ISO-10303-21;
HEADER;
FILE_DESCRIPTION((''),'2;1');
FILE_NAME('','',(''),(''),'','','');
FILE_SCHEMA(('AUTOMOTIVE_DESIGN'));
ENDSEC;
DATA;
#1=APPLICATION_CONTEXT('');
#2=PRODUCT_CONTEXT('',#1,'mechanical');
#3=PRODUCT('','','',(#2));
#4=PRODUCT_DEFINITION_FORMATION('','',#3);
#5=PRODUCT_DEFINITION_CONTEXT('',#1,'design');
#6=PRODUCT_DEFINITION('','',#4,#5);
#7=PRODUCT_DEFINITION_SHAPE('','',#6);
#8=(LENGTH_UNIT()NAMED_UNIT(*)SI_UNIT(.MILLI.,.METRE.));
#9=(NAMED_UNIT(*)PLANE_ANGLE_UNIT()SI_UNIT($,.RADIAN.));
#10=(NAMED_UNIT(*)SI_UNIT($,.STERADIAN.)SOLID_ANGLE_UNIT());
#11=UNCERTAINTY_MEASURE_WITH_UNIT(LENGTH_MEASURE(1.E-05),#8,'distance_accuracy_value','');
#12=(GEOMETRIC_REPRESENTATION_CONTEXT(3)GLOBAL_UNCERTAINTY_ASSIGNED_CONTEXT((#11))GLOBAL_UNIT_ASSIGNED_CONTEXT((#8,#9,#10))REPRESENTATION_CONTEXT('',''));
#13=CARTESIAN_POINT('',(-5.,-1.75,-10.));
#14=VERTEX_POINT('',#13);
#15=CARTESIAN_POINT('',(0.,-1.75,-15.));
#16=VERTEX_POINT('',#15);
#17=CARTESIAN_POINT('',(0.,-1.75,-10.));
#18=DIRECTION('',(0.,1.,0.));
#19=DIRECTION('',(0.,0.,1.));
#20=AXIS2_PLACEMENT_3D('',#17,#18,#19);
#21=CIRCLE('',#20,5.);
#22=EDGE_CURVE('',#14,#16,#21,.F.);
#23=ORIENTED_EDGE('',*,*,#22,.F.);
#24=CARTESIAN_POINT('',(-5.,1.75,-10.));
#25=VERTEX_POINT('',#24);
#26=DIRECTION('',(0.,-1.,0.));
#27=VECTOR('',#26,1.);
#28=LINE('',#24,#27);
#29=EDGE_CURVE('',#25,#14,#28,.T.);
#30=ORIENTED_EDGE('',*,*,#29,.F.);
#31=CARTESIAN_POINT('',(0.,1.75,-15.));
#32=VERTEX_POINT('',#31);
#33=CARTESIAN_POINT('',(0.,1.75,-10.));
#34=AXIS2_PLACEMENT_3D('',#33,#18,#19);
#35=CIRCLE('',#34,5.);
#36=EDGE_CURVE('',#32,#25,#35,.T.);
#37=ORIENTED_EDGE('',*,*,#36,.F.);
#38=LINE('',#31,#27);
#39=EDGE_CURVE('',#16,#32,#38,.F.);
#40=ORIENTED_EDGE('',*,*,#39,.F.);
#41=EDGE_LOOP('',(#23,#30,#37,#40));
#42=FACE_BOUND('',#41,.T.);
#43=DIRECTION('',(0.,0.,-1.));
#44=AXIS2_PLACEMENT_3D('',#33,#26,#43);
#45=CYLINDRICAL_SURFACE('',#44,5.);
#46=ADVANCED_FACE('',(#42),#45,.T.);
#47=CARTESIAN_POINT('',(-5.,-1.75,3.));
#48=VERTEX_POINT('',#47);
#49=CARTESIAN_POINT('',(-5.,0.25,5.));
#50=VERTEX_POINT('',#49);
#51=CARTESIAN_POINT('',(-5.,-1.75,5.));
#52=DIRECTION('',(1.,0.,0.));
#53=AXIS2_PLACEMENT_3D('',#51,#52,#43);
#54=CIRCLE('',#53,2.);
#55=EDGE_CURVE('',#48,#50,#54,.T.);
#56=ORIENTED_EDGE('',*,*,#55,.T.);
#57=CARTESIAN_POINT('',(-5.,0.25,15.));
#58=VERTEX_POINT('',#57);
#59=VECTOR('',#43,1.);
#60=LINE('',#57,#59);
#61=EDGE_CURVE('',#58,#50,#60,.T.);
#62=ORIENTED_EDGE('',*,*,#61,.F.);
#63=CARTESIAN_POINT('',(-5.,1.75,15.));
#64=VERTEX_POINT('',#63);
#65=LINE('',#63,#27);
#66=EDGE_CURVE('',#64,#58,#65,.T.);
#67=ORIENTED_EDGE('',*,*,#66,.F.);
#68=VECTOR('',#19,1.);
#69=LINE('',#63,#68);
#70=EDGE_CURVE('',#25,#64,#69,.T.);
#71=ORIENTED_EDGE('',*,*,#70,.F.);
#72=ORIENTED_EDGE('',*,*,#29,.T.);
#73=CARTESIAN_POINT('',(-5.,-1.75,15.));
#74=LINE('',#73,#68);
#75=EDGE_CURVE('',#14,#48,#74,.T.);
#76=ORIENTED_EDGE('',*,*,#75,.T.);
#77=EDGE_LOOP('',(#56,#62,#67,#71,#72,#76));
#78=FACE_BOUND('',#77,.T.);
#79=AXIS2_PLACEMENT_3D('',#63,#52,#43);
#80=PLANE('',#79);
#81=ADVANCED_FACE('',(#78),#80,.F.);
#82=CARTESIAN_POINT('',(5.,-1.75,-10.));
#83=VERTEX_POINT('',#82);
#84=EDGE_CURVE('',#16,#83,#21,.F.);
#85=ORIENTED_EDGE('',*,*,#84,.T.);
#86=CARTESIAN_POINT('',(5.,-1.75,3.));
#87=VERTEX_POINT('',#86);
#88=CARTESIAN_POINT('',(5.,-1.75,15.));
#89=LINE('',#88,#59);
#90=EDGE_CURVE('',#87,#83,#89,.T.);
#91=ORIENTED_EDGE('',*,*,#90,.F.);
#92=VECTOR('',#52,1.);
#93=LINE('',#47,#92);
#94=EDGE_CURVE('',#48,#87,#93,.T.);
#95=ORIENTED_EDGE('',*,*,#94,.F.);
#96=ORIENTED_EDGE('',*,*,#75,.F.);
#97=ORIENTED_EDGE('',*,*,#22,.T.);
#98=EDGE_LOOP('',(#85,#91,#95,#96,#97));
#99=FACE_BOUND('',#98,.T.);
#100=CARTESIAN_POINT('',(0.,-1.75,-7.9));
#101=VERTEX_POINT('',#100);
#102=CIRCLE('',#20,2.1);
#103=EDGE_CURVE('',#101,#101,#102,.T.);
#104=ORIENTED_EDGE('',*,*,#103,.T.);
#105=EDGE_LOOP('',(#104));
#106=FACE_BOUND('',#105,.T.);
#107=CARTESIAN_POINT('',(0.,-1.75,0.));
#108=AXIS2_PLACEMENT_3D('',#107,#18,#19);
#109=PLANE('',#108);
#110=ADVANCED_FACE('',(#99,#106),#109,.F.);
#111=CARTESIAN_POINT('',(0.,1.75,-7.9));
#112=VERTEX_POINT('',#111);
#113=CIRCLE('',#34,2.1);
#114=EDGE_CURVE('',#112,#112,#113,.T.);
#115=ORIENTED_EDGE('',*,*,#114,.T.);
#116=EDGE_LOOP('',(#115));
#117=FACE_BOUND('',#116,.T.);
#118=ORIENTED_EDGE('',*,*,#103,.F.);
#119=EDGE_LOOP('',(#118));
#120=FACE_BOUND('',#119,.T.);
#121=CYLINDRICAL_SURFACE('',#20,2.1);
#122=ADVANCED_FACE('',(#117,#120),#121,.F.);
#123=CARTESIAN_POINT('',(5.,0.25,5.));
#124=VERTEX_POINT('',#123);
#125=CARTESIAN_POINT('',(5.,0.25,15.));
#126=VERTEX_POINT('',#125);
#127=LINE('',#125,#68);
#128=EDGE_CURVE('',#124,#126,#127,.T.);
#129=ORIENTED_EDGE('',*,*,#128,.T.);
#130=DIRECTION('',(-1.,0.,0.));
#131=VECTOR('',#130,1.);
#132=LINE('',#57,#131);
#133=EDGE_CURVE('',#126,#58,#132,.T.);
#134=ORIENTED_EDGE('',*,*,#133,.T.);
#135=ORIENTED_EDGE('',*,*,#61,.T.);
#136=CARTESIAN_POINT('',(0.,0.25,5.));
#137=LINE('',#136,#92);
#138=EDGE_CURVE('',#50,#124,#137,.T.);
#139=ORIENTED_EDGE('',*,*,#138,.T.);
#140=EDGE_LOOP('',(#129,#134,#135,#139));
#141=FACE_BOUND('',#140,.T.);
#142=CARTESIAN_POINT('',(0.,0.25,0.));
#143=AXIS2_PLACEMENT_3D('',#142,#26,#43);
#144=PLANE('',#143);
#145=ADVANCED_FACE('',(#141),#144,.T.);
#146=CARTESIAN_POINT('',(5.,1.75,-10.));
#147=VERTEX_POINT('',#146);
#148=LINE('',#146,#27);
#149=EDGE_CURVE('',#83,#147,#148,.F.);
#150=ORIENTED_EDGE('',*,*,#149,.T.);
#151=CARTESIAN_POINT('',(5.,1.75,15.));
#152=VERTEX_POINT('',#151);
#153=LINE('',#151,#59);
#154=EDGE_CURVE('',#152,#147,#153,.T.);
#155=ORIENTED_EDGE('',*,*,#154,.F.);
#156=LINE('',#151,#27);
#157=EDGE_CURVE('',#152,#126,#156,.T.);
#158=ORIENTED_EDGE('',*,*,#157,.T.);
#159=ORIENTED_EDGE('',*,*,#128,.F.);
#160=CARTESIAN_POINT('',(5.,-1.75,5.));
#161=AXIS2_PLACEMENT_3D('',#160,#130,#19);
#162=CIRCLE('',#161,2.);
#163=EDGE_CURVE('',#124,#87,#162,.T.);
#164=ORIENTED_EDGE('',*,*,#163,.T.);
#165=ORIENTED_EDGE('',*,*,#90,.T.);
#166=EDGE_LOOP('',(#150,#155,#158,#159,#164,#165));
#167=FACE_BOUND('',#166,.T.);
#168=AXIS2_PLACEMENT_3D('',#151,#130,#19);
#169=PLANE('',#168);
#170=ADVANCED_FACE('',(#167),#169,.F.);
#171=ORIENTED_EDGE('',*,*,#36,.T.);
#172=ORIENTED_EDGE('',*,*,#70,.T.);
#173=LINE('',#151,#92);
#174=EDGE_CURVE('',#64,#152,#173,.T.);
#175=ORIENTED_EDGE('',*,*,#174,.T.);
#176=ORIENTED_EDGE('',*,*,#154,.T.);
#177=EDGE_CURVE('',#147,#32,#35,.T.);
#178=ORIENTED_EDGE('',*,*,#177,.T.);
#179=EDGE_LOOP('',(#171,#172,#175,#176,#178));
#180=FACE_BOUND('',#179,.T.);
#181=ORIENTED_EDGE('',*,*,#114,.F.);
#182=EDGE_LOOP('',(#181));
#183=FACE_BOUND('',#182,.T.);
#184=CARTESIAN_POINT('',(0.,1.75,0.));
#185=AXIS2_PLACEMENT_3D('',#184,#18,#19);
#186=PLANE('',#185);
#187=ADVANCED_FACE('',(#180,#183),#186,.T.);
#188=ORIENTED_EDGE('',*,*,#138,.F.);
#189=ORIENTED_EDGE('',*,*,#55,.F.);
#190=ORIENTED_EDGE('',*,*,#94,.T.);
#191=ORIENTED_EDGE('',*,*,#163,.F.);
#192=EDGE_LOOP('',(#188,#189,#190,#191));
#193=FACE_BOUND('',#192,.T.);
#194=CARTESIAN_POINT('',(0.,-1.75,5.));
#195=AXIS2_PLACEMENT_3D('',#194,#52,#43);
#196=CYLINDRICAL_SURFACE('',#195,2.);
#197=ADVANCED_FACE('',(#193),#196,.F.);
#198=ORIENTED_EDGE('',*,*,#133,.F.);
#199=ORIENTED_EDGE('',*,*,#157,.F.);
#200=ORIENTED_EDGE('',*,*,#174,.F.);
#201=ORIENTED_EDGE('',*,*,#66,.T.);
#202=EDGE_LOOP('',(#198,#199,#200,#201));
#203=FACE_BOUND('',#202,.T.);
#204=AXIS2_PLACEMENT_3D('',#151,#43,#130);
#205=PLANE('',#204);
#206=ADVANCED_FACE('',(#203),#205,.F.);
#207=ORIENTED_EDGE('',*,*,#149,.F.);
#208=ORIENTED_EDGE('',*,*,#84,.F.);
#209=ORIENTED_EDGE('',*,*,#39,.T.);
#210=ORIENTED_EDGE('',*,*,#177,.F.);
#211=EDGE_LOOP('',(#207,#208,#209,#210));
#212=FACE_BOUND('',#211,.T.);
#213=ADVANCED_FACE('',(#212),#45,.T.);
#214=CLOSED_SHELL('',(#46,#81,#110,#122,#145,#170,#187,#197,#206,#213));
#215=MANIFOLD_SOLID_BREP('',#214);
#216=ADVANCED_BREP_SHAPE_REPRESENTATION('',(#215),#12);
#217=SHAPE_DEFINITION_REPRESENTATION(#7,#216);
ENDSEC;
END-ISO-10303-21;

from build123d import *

# Parameters (mm, degrees)
CROQUIS1_W              = 10
CROQUIS1_H              = 30
SALIENTE_EXTRUIR1_DEPTH = 1.75
REDONDEO1_R             = 5
CROQUIS2_R              = 2.1
CORTAR_EXTRUIR1_DEPTH   = 3.5
CROQUIS3_W              = 10
CROQUIS3_H              = 12
CORTAR_EXTRUIR2_DEPTH   = 2
REDONDEO2_R             = 2


with BuildPart() as part:
    # Croquis1 → Saliente-Extruir1 (new, symmetric)
    with BuildSketch(Plane(origin=(0, 0, 0), x_dir=(1, 0, 0), z_dir=(0, 1, 0))):
        Rectangle(CROQUIS1_W, CROQUIS1_H)
    extrude(amount=SALIENTE_EXTRUIR1_DEPTH, both=True)

    # Redondeo1
    redondeo1_edges = [part.edges().sort_by_distance(p)[0] for p in [
        (5, 0, -15),
        (-5, 0, -15),
    ]]
    fillet(redondeo1_edges, radius=REDONDEO1_R - 0.0001)  # a hair under: the kernel refuses the full size

    # Croquis2 → Cortar-Extruir1 (cut)
    with BuildSketch(Plane(origin=(0, 1.75, 0), x_dir=(1, 0, 0), z_dir=(0, 1, 0))):
        with Locations(Location((0, 10, 0), (0, 0, 270))):
            Circle(CROQUIS2_R)
    extrude(amount=-CORTAR_EXTRUIR1_DEPTH, mode=Mode.SUBTRACT)

    # Croquis3 → Cortar-Extruir2 (cut)
    with BuildSketch(Plane.XZ.offset(1.75)):
        with Locations((0, 9)):
            Rectangle(CROQUIS3_W, CROQUIS3_H)
    extrude(amount=-CORTAR_EXTRUIR2_DEPTH, mode=Mode.SUBTRACT)

    # Redondeo2
    redondeo2_edges = [part.edges().sort_by_distance(p)[0] for p in [
        (0, 0.25, 3),
    ]]
    fillet(redondeo2_edges, radius=REDONDEO2_R - 0.0001)  # a hair under: the kernel refuses the full size


solid = part.part
